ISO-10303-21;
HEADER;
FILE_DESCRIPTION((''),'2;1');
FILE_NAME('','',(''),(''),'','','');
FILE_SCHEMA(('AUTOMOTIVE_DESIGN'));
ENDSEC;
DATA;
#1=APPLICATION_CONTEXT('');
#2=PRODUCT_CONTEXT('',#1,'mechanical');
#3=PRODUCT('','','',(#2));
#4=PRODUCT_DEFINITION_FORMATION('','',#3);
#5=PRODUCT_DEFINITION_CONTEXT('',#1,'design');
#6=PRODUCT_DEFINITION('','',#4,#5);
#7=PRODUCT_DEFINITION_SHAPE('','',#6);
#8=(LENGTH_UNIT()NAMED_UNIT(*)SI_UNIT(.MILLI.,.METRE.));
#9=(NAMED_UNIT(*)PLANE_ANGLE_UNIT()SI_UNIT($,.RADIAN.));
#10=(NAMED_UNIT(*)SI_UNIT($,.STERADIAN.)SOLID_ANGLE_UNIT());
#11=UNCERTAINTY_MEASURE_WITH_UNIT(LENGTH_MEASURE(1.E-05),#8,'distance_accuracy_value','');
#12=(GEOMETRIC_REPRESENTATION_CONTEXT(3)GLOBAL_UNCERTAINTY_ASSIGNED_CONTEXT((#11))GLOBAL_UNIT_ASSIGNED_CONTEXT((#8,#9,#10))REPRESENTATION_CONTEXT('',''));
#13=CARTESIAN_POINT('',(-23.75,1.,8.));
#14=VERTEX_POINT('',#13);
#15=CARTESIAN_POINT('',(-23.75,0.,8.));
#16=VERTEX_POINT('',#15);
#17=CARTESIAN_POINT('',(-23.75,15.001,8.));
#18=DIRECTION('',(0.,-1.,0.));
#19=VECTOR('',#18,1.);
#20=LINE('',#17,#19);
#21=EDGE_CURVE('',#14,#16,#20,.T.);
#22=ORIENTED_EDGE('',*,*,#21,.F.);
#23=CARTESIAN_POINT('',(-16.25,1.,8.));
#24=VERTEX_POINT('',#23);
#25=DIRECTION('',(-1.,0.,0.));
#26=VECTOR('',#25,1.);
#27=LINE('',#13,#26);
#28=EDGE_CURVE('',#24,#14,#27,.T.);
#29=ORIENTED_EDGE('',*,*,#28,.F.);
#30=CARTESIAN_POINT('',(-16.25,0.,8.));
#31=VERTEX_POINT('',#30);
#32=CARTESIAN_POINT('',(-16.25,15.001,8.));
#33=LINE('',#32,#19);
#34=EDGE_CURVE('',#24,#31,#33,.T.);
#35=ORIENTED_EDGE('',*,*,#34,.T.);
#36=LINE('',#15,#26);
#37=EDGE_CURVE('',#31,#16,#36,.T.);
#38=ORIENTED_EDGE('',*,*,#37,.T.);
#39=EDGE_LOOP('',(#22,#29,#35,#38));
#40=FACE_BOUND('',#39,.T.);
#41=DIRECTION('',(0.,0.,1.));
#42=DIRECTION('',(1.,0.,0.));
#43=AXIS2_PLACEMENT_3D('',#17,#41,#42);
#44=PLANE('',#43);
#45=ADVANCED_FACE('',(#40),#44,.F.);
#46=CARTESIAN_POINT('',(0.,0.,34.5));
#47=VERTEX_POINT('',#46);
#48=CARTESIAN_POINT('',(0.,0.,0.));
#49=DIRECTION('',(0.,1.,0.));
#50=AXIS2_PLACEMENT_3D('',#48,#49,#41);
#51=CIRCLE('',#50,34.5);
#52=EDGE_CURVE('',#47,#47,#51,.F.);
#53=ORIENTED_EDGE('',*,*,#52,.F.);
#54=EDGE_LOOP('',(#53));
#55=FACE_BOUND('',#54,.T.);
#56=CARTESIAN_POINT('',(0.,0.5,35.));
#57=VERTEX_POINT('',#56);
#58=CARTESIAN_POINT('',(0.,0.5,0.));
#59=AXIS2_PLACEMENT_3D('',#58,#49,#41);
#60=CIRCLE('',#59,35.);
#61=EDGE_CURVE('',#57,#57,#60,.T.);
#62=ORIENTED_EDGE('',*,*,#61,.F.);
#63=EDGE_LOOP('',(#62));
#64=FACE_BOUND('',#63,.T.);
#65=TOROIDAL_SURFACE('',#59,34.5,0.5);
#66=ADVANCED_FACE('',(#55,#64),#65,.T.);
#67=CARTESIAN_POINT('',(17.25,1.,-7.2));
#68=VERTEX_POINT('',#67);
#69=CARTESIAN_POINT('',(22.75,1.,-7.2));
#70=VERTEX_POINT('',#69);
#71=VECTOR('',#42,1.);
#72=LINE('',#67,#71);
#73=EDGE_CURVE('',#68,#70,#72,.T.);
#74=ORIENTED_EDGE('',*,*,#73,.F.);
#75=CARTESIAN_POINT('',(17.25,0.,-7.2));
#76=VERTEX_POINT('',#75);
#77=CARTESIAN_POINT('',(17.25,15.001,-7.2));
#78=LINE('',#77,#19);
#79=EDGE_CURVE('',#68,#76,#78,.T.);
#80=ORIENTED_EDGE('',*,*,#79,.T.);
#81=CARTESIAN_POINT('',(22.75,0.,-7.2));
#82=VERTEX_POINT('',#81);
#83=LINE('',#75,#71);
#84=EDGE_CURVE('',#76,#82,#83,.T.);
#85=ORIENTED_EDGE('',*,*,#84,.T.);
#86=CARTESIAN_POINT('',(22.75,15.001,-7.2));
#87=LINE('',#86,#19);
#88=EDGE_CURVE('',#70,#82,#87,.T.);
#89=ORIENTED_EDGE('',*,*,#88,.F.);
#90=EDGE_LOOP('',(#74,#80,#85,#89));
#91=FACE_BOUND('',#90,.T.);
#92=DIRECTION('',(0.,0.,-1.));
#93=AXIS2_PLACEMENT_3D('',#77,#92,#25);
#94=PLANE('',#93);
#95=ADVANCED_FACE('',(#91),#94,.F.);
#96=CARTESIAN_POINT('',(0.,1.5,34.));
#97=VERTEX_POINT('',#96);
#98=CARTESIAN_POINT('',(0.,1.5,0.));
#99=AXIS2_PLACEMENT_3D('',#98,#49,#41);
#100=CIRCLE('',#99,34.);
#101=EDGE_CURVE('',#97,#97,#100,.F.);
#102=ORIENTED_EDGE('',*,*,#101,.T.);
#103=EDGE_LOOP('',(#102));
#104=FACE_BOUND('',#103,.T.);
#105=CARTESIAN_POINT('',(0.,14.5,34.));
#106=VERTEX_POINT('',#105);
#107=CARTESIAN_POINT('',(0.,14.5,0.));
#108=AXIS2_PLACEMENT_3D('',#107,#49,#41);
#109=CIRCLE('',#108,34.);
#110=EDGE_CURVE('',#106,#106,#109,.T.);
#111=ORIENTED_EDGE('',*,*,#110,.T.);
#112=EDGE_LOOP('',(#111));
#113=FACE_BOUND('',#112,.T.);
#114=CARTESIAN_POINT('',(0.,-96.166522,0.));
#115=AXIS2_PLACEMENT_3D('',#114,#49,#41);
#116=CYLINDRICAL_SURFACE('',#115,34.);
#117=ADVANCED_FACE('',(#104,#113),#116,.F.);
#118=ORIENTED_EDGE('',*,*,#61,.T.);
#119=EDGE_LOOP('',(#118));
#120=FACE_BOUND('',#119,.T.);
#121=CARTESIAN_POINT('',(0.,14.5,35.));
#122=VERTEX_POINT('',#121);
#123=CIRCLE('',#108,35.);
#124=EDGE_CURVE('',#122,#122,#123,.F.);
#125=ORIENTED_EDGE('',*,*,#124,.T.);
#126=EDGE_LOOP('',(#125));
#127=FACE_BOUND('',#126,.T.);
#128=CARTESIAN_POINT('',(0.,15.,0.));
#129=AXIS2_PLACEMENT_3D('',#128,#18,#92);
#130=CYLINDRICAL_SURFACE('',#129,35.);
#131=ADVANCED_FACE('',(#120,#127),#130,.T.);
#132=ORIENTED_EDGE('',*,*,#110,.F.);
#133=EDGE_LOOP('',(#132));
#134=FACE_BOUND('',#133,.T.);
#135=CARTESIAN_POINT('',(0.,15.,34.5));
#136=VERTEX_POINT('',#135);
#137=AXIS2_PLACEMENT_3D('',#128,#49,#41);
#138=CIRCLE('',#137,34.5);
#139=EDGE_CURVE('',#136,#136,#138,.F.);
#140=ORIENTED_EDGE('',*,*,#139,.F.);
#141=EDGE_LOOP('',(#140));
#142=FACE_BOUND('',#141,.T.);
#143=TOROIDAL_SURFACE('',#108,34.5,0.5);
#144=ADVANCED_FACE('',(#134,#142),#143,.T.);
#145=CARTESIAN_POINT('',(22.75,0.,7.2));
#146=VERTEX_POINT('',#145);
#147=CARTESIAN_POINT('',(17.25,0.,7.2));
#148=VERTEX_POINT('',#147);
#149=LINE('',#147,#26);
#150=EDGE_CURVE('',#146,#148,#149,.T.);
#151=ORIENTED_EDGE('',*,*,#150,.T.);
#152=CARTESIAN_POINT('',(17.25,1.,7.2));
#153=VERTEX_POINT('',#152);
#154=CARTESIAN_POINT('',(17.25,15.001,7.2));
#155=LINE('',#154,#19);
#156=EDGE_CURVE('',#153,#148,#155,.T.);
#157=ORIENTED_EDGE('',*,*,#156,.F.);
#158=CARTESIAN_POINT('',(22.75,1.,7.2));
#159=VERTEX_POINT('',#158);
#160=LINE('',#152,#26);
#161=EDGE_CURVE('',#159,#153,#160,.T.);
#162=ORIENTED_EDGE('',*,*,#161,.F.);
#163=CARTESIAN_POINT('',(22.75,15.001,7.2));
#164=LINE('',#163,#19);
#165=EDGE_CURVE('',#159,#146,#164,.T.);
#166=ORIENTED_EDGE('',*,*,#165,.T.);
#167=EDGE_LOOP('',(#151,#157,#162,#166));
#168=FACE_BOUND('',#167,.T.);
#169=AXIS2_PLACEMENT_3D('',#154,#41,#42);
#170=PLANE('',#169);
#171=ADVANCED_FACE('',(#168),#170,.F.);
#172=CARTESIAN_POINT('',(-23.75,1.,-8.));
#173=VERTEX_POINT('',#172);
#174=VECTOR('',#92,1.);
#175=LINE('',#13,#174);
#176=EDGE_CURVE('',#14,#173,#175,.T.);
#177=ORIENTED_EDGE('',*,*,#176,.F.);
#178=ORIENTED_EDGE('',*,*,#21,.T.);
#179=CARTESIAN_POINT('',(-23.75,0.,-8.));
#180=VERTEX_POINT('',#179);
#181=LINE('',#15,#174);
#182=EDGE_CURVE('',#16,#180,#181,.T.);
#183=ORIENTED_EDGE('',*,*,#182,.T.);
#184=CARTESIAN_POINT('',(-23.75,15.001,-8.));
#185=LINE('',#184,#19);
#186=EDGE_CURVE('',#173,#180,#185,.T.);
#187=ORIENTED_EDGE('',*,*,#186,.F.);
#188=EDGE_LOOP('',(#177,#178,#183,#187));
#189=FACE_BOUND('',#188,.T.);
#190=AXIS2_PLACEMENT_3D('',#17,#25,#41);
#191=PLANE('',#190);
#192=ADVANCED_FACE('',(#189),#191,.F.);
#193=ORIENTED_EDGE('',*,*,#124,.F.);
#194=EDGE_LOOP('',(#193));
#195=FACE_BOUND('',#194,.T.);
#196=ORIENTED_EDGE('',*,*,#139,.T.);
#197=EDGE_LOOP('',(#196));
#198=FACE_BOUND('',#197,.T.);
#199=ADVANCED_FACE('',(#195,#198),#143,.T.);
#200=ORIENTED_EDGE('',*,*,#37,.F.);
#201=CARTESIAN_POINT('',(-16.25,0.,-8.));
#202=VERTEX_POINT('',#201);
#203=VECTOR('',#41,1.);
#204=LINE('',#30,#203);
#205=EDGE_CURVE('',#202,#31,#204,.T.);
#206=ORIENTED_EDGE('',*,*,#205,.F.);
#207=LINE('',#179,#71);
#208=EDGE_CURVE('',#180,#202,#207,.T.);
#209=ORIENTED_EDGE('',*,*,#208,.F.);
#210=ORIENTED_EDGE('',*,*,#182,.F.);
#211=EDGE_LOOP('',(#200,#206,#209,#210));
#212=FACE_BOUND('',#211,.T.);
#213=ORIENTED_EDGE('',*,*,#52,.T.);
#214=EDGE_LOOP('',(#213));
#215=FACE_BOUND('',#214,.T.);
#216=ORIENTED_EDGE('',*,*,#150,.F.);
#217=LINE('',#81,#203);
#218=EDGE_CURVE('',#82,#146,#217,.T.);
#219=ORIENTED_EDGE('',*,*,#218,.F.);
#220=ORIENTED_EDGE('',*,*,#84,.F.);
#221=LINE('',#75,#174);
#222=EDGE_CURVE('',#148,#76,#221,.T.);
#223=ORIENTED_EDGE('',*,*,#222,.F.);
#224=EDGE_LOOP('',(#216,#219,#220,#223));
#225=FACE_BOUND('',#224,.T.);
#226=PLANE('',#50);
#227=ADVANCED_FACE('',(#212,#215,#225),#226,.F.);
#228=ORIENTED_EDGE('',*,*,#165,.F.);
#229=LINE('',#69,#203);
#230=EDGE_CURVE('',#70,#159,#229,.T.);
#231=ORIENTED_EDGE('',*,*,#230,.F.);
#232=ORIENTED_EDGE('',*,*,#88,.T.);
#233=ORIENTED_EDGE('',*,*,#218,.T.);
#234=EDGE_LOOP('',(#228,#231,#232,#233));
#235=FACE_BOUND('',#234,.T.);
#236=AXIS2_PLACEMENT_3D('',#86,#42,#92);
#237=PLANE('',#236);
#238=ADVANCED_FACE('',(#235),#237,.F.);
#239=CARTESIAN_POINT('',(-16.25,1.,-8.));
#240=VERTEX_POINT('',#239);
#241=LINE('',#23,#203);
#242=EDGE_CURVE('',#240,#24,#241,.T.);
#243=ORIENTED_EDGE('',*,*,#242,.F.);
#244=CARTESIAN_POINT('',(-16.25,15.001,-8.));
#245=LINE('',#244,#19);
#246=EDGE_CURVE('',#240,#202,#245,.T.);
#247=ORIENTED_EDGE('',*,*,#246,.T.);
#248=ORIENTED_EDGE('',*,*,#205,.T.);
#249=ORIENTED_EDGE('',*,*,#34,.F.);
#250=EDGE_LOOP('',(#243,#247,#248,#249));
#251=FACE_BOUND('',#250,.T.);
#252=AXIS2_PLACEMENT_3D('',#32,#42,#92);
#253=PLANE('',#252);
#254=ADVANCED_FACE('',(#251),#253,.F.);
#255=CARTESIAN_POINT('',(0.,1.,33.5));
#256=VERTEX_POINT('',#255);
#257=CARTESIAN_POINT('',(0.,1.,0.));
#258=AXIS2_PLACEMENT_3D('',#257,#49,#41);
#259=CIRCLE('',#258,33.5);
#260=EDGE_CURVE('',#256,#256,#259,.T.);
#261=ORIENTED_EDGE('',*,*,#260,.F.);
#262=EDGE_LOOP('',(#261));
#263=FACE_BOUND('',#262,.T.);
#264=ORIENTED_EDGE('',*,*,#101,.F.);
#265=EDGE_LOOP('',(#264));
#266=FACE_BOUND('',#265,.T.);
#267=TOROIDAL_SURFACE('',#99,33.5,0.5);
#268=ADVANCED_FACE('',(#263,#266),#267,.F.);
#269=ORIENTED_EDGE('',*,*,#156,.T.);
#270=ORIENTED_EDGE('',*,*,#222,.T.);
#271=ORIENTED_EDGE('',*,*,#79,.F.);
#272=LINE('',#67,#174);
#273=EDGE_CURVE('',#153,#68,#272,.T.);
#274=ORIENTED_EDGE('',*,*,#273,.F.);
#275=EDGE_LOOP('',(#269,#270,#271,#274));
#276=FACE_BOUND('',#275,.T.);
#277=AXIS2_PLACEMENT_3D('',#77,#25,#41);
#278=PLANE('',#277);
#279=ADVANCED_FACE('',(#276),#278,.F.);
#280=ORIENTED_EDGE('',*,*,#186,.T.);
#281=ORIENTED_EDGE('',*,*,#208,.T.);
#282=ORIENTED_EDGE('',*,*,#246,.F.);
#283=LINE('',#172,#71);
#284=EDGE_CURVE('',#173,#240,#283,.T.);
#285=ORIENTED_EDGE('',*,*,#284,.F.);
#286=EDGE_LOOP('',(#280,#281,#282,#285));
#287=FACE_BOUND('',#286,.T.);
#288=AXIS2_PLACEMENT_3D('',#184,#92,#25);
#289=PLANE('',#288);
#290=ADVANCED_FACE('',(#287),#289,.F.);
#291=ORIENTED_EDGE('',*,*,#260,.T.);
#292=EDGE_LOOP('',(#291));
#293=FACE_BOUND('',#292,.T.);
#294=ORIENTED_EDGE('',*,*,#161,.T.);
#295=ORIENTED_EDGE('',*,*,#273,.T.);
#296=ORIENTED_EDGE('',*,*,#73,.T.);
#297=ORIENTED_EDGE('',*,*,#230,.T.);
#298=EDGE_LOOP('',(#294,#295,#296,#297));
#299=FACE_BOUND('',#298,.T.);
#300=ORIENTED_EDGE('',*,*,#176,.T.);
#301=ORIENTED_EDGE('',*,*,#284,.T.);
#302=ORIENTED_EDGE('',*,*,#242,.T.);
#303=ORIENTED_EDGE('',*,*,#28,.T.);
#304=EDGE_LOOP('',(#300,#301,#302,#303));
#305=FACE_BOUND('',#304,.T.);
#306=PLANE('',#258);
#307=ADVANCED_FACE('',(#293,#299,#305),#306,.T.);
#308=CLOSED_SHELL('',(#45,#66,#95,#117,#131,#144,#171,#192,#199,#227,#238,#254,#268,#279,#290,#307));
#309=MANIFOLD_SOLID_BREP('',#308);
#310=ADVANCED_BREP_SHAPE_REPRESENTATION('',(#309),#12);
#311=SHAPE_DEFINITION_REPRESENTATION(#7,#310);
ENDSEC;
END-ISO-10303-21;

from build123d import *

# Parameters (mm, degrees)
CROQUIS1_R              = 35
SALIENTE_EXTRUIR1_DEPTH = 15
CROQUIS2_R              = 34
CORTAR_EXTRUIR1_DEPTH   = 14
REDONDEO1_R             = 0.5
REDONDEO5_R             = 0.5
CORTAR_EXTRUIR2_REACH   = 53.72
CROQUIS3_W              = 5.5
CROQUIS3_H              = 14.4
CROQUIS3_W_2            = 7.5
CROQUIS3_H_2            = 16


with BuildPart() as part:
    # Croquis1 → Saliente-Extruir1 (new body)
    with BuildSketch(Plane(origin=(0, 0, 0), x_dir=(1, 0, 0), z_dir=(0, 1, 0))):
        with Locations(Location((0, 0, 0), (0, 0, 270))):
            Circle(CROQUIS1_R)
    extrude(amount=SALIENTE_EXTRUIR1_DEPTH)

    # Croquis2 → Cortar-Extruir1 (cut)
    with BuildSketch(Plane(origin=(0, 15, 0), x_dir=(1, 0, 0), z_dir=(0, 1, 0))):
        with Locations(Location((0, 0, 0), (0, 0, 270))):
            Circle(CROQUIS2_R)
    extrude(amount=-CORTAR_EXTRUIR1_DEPTH, mode=Mode.SUBTRACT)

    # Redondeo1
    redondeo1_edges = [part.edges().sort_by_distance(p)[0] for p in [
        (0, 0, -35),
    ]]
    fillet(redondeo1_edges, radius=REDONDEO1_R)

    # Redondeo5
    redondeo5_edges = [part.edges().sort_by_distance(p)[0] for p in [
        (0, 15, -35),
        (0, 15, -34),
        (0, 1, -34),
    ]]
    fillet(redondeo5_edges, radius=REDONDEO5_R - 0.0001)  # a hair under: the kernel refuses the full size

    # Croquis3 → Cortar-Extruir2 (cut, up to next)
    with BuildSketch(Plane.XZ, mode=Mode.PRIVATE) as cortar_extruir2_sk1:
        with Locations((20, 0)):
            Rectangle(CROQUIS3_W, CROQUIS3_H)
    cortar_extruir2_tool1 = extrude(cortar_extruir2_sk1.sketch, amount=-CORTAR_EXTRUIR2_REACH, mode=Mode.PRIVATE) & part.part
    # Croquis3 → Cortar-Extruir2 (cut, up to next)
    with BuildSketch(Plane.XZ, mode=Mode.PRIVATE) as cortar_extruir2_sk2:
        with Locations((-20, 0)):
            Rectangle(CROQUIS3_W_2, CROQUIS3_H_2)
    cortar_extruir2_tool2 = extrude(cortar_extruir2_sk2.sketch, amount=-CORTAR_EXTRUIR2_REACH, mode=Mode.PRIVATE) & part.part
    add(cortar_extruir2_tool1.solids().sort_by_distance((20, 0, 0))[0], mode=Mode.SUBTRACT)
    add(cortar_extruir2_tool2.solids().sort_by_distance((-20, 0, 0))[0], mode=Mode.SUBTRACT)


solid = part.part
